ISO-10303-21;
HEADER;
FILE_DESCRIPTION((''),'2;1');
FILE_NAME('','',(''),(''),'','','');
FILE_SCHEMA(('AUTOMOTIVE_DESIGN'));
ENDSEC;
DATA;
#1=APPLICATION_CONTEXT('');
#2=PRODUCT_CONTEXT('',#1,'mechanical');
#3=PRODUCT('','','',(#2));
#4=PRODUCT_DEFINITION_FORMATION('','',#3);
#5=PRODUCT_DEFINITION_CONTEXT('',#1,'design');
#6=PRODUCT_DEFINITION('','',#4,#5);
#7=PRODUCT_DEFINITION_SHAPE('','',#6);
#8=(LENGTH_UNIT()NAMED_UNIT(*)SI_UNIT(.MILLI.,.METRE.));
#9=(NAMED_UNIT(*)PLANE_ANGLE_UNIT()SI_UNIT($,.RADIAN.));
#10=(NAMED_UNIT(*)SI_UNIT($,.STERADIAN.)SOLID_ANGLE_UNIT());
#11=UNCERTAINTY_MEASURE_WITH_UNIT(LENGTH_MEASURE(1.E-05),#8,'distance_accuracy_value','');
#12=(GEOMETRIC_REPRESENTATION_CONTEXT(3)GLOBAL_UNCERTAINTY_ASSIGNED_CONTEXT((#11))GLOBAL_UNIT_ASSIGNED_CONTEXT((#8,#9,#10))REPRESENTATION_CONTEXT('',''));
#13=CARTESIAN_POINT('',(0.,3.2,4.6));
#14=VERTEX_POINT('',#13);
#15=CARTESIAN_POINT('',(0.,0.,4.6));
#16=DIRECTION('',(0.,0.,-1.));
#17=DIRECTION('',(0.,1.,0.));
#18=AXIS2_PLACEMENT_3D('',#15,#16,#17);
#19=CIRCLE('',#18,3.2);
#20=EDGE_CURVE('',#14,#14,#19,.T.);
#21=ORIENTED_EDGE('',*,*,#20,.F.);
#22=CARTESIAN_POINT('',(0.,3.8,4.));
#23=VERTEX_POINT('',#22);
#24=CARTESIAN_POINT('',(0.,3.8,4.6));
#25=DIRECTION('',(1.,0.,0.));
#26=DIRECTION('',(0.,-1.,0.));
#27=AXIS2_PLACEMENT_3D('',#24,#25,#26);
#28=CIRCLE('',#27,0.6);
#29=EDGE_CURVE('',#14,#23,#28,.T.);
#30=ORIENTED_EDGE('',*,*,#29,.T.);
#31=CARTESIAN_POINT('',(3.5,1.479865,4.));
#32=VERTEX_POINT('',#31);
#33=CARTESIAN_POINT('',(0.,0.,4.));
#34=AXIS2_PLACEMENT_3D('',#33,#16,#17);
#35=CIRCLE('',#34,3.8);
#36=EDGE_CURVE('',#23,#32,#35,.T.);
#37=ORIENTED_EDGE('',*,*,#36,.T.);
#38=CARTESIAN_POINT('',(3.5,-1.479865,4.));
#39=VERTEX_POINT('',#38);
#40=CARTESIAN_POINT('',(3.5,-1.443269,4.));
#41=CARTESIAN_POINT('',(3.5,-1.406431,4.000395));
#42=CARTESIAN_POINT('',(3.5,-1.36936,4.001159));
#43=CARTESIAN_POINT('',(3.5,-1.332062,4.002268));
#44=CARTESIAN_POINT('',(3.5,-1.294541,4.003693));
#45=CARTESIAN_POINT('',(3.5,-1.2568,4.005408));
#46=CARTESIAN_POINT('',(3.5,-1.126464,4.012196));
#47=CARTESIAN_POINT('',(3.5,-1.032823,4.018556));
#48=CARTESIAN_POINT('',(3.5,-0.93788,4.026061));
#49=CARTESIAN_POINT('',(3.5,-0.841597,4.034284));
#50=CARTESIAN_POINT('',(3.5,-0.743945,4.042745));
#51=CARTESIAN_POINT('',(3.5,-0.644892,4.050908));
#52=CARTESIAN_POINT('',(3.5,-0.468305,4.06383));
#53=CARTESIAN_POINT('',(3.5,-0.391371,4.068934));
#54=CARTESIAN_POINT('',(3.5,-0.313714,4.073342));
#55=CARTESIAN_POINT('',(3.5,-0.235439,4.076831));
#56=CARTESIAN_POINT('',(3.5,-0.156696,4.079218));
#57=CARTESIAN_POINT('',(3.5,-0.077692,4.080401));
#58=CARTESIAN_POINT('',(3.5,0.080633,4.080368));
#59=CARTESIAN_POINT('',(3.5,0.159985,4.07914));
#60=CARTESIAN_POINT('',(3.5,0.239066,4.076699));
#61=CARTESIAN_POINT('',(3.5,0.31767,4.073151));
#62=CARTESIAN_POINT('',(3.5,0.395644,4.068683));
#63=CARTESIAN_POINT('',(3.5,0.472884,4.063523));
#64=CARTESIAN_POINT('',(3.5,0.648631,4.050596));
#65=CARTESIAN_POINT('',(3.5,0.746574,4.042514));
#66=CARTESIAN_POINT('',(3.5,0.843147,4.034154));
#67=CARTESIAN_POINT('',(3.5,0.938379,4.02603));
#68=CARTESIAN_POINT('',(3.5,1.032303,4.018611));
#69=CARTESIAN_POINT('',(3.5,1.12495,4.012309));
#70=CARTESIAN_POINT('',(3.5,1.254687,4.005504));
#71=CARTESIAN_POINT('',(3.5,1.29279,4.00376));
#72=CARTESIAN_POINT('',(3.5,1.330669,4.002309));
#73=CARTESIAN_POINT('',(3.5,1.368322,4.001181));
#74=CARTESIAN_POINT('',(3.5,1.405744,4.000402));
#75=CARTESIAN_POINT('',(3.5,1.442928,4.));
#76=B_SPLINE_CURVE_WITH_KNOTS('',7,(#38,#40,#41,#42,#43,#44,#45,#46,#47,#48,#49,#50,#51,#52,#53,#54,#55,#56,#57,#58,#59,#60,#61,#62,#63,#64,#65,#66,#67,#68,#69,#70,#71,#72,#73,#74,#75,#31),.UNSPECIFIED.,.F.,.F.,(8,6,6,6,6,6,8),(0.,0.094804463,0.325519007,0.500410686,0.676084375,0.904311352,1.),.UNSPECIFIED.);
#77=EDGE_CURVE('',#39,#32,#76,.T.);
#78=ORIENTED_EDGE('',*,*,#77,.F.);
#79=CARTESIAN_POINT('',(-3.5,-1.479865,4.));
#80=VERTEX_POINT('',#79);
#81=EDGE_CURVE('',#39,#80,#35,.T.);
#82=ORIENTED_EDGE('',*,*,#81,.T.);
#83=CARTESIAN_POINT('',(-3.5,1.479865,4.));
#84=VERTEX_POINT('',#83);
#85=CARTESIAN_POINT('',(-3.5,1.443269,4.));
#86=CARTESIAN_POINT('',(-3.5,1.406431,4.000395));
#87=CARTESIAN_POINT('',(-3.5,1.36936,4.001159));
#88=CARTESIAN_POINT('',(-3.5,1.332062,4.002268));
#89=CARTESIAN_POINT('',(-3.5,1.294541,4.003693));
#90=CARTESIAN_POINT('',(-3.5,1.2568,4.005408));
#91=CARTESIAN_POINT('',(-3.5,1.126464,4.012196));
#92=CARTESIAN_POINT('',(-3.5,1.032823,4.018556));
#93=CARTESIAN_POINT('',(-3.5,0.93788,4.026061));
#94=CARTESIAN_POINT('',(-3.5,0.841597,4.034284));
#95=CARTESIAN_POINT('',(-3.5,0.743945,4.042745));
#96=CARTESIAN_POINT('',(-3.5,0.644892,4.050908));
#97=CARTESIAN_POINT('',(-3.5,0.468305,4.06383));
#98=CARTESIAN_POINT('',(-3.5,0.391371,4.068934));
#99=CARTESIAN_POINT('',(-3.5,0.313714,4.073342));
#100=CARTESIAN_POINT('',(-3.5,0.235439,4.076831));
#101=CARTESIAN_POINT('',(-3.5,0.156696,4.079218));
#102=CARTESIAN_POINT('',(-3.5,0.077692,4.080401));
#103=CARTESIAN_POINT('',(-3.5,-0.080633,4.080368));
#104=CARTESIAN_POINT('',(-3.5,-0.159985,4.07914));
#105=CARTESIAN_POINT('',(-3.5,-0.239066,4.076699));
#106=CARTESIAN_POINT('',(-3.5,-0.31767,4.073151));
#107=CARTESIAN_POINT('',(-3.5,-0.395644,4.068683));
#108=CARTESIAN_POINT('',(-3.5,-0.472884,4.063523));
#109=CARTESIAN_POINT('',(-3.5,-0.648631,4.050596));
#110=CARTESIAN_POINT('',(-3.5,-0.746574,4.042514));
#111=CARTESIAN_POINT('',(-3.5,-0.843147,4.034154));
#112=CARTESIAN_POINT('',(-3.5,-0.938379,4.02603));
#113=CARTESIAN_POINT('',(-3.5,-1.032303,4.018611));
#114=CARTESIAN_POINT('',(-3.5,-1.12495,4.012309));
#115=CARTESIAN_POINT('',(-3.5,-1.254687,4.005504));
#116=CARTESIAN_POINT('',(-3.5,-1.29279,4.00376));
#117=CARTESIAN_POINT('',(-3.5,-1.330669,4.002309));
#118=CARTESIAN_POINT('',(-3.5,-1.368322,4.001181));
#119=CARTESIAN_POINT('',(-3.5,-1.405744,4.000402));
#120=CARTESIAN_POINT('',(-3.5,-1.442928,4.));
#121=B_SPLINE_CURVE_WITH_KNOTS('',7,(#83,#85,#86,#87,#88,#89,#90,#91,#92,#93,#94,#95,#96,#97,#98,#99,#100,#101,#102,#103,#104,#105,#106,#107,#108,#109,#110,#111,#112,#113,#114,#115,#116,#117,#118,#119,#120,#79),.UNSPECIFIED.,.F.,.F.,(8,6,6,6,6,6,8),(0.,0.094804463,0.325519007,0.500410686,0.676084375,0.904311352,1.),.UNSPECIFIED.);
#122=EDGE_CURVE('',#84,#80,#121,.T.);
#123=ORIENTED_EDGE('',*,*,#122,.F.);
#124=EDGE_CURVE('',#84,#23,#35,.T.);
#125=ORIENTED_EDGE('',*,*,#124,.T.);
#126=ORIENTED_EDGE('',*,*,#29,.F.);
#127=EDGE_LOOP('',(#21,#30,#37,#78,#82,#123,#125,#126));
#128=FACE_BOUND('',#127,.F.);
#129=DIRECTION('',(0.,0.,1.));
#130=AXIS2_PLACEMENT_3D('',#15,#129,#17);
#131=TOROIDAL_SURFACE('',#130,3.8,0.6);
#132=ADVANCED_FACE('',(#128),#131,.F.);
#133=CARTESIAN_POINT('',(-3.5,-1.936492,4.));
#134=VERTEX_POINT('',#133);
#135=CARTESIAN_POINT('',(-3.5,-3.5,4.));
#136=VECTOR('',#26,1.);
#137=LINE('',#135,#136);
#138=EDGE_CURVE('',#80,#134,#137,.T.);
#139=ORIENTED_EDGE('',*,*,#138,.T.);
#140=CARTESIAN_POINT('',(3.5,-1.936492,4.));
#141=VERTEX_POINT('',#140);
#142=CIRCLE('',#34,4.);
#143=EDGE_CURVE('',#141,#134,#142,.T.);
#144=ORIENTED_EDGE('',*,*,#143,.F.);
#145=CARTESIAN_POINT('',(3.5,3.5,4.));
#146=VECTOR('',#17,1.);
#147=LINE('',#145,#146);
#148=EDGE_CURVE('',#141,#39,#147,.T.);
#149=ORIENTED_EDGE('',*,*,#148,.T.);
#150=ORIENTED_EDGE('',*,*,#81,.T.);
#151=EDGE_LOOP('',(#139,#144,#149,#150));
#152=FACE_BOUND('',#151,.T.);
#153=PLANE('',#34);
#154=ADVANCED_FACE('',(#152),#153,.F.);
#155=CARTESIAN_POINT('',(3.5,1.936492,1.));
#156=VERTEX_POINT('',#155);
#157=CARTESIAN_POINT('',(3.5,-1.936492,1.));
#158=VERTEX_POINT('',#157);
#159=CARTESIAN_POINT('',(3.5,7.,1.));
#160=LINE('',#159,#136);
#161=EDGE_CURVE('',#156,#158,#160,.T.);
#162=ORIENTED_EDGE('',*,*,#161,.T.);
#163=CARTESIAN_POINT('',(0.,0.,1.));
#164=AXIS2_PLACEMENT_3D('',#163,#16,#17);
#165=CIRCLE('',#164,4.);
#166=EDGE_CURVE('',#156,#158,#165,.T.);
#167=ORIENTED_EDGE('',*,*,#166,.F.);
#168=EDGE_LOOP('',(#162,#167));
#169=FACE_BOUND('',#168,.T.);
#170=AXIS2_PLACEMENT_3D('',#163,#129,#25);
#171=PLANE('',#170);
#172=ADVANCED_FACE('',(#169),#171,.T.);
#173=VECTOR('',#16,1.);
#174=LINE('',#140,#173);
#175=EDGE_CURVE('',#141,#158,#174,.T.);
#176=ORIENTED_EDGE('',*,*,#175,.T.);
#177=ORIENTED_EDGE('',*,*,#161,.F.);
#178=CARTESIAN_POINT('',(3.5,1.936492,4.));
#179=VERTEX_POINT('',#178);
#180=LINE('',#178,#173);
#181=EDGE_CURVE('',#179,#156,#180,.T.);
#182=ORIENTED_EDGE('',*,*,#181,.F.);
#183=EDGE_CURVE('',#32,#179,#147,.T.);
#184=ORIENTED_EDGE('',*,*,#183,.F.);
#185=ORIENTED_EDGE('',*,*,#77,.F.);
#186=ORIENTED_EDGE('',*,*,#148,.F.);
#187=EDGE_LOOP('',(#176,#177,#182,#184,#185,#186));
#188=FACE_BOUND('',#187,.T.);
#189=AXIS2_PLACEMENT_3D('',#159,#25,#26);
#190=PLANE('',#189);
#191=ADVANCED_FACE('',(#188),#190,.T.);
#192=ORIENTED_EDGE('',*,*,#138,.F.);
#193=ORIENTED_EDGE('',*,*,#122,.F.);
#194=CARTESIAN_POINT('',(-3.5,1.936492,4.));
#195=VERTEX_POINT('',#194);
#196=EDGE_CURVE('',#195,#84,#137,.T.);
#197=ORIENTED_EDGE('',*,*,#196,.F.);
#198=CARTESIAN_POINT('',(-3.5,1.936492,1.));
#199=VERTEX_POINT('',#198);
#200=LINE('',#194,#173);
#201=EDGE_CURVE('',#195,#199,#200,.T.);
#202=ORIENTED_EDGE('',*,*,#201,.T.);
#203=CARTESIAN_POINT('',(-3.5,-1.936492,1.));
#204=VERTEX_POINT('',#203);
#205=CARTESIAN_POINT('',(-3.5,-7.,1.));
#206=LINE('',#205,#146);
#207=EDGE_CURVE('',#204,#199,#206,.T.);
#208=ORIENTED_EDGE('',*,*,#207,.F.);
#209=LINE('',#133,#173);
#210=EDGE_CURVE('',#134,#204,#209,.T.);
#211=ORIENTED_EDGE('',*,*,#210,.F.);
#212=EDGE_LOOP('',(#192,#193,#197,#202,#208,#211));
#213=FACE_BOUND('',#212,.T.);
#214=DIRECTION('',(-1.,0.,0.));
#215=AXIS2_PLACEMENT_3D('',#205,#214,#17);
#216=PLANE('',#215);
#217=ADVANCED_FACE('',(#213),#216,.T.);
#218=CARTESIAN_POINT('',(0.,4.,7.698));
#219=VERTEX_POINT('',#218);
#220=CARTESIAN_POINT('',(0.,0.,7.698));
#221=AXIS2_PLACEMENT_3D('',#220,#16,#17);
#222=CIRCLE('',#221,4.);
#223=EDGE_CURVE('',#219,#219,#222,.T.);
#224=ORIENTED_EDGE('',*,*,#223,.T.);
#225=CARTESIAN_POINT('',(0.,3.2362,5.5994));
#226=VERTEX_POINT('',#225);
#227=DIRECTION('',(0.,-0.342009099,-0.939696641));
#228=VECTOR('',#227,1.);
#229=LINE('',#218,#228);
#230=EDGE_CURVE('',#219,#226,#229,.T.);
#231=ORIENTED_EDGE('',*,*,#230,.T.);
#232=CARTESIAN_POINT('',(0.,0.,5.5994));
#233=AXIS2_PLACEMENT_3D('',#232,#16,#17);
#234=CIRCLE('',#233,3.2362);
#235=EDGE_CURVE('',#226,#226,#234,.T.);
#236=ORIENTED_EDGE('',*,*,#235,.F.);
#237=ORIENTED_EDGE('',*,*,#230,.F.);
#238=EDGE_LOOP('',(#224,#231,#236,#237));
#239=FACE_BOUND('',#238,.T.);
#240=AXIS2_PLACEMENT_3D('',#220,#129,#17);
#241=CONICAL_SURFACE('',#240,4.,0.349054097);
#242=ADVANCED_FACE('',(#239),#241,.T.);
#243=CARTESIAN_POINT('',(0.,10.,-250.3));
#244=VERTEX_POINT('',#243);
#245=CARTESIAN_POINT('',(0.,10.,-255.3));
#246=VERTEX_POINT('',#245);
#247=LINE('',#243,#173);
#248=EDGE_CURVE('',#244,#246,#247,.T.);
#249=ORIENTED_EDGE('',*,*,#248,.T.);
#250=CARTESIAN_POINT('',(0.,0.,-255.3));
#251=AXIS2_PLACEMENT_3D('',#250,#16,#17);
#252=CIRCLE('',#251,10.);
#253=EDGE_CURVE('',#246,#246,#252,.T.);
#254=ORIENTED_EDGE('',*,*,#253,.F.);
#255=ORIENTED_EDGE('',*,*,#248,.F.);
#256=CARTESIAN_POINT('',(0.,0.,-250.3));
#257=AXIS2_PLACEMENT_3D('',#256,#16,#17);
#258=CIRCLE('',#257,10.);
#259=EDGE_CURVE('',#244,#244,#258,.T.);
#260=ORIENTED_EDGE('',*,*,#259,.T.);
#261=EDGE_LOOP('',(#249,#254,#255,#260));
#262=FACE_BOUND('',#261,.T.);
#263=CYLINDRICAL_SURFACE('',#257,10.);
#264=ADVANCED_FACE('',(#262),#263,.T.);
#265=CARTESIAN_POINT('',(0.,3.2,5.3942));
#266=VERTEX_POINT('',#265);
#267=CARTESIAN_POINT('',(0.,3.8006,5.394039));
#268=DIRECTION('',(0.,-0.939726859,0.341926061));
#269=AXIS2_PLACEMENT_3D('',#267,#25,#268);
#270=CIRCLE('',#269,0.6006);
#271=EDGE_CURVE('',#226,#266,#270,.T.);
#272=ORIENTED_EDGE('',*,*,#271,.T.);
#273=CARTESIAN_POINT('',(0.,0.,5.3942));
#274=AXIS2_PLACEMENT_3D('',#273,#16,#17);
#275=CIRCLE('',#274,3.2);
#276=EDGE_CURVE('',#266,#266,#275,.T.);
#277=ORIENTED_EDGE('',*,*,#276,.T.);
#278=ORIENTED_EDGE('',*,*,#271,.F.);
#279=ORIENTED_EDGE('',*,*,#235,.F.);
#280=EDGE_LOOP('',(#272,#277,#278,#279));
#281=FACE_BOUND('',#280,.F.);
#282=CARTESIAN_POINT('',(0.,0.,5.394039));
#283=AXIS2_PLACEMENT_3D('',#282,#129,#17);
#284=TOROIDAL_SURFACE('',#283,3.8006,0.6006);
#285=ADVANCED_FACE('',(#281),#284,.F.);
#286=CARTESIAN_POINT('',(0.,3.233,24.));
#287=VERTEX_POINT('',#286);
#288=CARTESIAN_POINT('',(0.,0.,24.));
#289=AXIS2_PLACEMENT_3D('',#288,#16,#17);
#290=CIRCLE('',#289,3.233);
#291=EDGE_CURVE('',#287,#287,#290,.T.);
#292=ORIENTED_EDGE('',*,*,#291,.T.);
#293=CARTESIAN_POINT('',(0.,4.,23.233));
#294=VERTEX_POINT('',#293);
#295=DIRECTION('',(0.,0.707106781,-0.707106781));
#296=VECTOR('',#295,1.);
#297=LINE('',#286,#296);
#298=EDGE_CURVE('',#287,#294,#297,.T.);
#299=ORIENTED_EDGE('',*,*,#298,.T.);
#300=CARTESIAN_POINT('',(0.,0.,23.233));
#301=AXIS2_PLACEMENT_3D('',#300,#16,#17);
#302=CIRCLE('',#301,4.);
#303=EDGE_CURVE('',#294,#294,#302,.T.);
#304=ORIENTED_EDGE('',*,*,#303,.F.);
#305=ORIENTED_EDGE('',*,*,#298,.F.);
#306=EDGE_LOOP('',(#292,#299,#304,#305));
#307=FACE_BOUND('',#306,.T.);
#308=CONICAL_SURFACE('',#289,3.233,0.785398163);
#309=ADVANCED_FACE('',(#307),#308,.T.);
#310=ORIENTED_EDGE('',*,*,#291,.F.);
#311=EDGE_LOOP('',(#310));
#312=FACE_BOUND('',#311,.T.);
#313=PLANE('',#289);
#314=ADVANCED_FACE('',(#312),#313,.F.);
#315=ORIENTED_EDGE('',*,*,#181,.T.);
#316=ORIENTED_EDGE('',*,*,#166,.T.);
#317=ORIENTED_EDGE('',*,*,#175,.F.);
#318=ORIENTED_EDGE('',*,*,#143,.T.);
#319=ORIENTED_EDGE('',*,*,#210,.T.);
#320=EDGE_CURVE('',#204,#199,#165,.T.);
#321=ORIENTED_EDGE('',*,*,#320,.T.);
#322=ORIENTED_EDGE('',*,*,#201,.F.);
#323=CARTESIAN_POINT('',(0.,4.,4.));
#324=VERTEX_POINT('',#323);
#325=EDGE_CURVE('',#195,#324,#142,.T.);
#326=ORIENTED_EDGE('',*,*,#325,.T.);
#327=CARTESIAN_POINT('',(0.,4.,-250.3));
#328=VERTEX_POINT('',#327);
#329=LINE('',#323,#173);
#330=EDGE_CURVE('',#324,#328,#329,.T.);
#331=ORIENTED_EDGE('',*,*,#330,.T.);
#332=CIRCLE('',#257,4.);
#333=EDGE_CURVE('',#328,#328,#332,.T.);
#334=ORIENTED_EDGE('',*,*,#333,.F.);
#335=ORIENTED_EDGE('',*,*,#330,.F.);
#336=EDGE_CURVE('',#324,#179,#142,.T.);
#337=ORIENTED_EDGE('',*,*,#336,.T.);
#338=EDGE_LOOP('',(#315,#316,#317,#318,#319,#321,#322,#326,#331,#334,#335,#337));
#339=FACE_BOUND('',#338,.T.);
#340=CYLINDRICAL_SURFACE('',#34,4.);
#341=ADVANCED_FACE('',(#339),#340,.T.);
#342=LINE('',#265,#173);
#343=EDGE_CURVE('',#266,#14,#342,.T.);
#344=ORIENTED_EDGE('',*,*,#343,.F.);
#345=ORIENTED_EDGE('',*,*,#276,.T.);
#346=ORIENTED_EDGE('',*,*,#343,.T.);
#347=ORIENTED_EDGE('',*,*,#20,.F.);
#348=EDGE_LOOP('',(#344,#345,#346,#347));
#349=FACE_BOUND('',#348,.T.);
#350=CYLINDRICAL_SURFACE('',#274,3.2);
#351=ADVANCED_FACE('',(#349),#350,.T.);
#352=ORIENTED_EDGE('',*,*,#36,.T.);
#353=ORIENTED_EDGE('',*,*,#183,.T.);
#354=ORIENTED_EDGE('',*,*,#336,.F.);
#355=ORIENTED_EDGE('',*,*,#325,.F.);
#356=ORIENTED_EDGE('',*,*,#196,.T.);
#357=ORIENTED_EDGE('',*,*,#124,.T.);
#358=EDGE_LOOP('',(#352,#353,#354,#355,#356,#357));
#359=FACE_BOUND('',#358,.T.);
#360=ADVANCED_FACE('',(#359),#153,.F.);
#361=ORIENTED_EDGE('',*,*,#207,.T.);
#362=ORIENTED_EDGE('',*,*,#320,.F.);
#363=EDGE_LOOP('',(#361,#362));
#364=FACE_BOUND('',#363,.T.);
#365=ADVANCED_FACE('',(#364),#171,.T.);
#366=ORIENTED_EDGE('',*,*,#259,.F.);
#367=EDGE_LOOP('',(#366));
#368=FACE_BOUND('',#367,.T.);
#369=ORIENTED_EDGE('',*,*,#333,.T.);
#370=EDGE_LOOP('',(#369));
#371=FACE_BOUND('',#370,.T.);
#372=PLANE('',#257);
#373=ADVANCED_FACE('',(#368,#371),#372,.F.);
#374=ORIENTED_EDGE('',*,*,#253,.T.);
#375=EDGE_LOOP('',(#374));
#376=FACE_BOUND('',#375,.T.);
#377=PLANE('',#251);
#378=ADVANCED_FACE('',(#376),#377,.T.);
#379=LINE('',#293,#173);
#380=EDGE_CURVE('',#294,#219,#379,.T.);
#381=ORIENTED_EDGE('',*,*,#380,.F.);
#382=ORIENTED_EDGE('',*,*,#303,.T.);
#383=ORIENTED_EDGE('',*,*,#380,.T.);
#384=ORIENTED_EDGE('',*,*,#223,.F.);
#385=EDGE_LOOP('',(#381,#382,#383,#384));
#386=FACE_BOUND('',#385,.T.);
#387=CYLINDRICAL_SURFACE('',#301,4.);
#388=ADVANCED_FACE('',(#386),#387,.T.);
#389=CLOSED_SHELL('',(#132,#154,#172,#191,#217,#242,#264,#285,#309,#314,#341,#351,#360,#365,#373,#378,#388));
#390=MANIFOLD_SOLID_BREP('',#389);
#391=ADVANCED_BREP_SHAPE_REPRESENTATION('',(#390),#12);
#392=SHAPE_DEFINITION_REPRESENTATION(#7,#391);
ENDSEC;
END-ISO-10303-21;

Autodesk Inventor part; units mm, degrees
sketch "Sketch_2" plane through (0, 0, 0) normal (1, 0, 0) x (0, 1, 0)
  line L0 (0, -255.3) -> (0, 4)
  line L1 (0, 4) -> (4, 4)
  line L2 (4, 4) -> (4, -250.3)
  line L3 (4, -250.3) -> (10, -250.3)
  line L4 (10, -250.3) -> (10, -255.3)
  line L5 (10, -255.3) -> (0, -255.3)
  line L6 (0, -255.3) -> (0, 4)
revolve "Revolution1" add sketch "Sketch_2" angle 360 about axis through (0, 0, -255.3) along (0, 0, -1)
sketch "Sketch_6" plane through (0, 0, 0) normal (1, 0, 0) x (0, 1, 0)
  line L0 (0, 3) -> (0, 24)
  line L1 (0, 24) -> (3.233, 24)
  line L2 (3.233, 24) -> (4, 23.233)
  line L3 (4, 23.233) -> (4, 7.698)
  line L4 (4, 7.698) -> (3.2362, 5.5994)
  arc A0 (3.2362, 5.5994) -> (3.2, 5.3942) centre (3.8, 5.3942) ccw
  line L5 (3.2, 5.3942) -> (3.2, 4.6)
  arc A1 (3.2, 4.6) -> (3.8, 4) centre (3.8, 4.6) ccw
  line L6 (3.8, 4) -> (4, 4)
  line L7 (4, 4) -> (4, 3)
  line L8 (4, 3) -> (0, 3)
  line L9 (0, 3) -> (0, 24)
revolve "Revolution2" add sketch "Sketch_6" angle 360 about axis through (0, 0, 3) along (0, 0, -1)
thread "Thread1" size "M8x1.25" class "6g" standard "ISO Metric profile" full length
sketch "Sketch_7" plane through (0, 0, 1) normal (0, 0, 1) x (1, 0, 0)
  line L0 (-7, 14) -> (-7, -7)
  line L1 (-7, -7) -> (-3.5, -7)
  line L2 (-3.5, -7) -> (-3.5, 7)
  line L3 (-3.5, 7) -> (3.5, 7)
  line L4 (3.5, 7) -> (3.5, -7)
  line L5 (3.5, -7) -> (7, -7)
  line L6 (7, -7) -> (7, 14)
  line L7 (7, 14) -> (-7, 14)
extrude "Extrusion1" cut sketch "Sketch_7" along normal blind 4
ref_plane "FDT_KSAUFSATZ_XY" through (0, 0, 12) normal (0, 0, 1) x (-1, 0, 0)
ref_plane "FDT_KSAUFSATZ_YZ" through (0, 0, 12) normal (-1, 0, 0) x (0, -1, 0)
ref_plane "FDT_KSAUFSATZ_ZX" through (0, 0, 12) normal (0, -1, 0) x (0, 0, 1)
ref_plane "FDT_NUT_XY" through (0, 0, 12) normal (0, 0, 1) x (-1, 0, 0)
ref_plane "FDT_NUT_YZ" through (0, 0, 12) normal (-1, 0, 0) x (0, -1, 0)
ref_plane "FDT_NUT_ZX" through (0, 0, 12) normal (0, -1, 0) x (0, 0, 1)
ref_plane "KS_XY" through (0, 0, 0) normal (0, 0, -1) x (1, 0, 0)
ref_plane "KS_YZ" through (0, 0, 0) normal (1, 0, 0) x (0, -1, 0)
ref_plane "KS_ZX" through (0, 0, 0) normal (0, -1, 0) x (0, 0, -1)
ref_plane "NUT1_XY" through (0, 0, 20) normal (0, 0, 1) x (1, 0, 0)
ref_plane "NUT1_YZ" through (0, 0, 20) normal (1, 0, 0) x (0, 1, 0)
ref_plane "NUT1_ZX" through (0, 0, 20) normal (0, 1, 0) x (0, 0, 1)
properties part number "559278 DSNU-20-200-PPS---(A---00--0-KS)"
